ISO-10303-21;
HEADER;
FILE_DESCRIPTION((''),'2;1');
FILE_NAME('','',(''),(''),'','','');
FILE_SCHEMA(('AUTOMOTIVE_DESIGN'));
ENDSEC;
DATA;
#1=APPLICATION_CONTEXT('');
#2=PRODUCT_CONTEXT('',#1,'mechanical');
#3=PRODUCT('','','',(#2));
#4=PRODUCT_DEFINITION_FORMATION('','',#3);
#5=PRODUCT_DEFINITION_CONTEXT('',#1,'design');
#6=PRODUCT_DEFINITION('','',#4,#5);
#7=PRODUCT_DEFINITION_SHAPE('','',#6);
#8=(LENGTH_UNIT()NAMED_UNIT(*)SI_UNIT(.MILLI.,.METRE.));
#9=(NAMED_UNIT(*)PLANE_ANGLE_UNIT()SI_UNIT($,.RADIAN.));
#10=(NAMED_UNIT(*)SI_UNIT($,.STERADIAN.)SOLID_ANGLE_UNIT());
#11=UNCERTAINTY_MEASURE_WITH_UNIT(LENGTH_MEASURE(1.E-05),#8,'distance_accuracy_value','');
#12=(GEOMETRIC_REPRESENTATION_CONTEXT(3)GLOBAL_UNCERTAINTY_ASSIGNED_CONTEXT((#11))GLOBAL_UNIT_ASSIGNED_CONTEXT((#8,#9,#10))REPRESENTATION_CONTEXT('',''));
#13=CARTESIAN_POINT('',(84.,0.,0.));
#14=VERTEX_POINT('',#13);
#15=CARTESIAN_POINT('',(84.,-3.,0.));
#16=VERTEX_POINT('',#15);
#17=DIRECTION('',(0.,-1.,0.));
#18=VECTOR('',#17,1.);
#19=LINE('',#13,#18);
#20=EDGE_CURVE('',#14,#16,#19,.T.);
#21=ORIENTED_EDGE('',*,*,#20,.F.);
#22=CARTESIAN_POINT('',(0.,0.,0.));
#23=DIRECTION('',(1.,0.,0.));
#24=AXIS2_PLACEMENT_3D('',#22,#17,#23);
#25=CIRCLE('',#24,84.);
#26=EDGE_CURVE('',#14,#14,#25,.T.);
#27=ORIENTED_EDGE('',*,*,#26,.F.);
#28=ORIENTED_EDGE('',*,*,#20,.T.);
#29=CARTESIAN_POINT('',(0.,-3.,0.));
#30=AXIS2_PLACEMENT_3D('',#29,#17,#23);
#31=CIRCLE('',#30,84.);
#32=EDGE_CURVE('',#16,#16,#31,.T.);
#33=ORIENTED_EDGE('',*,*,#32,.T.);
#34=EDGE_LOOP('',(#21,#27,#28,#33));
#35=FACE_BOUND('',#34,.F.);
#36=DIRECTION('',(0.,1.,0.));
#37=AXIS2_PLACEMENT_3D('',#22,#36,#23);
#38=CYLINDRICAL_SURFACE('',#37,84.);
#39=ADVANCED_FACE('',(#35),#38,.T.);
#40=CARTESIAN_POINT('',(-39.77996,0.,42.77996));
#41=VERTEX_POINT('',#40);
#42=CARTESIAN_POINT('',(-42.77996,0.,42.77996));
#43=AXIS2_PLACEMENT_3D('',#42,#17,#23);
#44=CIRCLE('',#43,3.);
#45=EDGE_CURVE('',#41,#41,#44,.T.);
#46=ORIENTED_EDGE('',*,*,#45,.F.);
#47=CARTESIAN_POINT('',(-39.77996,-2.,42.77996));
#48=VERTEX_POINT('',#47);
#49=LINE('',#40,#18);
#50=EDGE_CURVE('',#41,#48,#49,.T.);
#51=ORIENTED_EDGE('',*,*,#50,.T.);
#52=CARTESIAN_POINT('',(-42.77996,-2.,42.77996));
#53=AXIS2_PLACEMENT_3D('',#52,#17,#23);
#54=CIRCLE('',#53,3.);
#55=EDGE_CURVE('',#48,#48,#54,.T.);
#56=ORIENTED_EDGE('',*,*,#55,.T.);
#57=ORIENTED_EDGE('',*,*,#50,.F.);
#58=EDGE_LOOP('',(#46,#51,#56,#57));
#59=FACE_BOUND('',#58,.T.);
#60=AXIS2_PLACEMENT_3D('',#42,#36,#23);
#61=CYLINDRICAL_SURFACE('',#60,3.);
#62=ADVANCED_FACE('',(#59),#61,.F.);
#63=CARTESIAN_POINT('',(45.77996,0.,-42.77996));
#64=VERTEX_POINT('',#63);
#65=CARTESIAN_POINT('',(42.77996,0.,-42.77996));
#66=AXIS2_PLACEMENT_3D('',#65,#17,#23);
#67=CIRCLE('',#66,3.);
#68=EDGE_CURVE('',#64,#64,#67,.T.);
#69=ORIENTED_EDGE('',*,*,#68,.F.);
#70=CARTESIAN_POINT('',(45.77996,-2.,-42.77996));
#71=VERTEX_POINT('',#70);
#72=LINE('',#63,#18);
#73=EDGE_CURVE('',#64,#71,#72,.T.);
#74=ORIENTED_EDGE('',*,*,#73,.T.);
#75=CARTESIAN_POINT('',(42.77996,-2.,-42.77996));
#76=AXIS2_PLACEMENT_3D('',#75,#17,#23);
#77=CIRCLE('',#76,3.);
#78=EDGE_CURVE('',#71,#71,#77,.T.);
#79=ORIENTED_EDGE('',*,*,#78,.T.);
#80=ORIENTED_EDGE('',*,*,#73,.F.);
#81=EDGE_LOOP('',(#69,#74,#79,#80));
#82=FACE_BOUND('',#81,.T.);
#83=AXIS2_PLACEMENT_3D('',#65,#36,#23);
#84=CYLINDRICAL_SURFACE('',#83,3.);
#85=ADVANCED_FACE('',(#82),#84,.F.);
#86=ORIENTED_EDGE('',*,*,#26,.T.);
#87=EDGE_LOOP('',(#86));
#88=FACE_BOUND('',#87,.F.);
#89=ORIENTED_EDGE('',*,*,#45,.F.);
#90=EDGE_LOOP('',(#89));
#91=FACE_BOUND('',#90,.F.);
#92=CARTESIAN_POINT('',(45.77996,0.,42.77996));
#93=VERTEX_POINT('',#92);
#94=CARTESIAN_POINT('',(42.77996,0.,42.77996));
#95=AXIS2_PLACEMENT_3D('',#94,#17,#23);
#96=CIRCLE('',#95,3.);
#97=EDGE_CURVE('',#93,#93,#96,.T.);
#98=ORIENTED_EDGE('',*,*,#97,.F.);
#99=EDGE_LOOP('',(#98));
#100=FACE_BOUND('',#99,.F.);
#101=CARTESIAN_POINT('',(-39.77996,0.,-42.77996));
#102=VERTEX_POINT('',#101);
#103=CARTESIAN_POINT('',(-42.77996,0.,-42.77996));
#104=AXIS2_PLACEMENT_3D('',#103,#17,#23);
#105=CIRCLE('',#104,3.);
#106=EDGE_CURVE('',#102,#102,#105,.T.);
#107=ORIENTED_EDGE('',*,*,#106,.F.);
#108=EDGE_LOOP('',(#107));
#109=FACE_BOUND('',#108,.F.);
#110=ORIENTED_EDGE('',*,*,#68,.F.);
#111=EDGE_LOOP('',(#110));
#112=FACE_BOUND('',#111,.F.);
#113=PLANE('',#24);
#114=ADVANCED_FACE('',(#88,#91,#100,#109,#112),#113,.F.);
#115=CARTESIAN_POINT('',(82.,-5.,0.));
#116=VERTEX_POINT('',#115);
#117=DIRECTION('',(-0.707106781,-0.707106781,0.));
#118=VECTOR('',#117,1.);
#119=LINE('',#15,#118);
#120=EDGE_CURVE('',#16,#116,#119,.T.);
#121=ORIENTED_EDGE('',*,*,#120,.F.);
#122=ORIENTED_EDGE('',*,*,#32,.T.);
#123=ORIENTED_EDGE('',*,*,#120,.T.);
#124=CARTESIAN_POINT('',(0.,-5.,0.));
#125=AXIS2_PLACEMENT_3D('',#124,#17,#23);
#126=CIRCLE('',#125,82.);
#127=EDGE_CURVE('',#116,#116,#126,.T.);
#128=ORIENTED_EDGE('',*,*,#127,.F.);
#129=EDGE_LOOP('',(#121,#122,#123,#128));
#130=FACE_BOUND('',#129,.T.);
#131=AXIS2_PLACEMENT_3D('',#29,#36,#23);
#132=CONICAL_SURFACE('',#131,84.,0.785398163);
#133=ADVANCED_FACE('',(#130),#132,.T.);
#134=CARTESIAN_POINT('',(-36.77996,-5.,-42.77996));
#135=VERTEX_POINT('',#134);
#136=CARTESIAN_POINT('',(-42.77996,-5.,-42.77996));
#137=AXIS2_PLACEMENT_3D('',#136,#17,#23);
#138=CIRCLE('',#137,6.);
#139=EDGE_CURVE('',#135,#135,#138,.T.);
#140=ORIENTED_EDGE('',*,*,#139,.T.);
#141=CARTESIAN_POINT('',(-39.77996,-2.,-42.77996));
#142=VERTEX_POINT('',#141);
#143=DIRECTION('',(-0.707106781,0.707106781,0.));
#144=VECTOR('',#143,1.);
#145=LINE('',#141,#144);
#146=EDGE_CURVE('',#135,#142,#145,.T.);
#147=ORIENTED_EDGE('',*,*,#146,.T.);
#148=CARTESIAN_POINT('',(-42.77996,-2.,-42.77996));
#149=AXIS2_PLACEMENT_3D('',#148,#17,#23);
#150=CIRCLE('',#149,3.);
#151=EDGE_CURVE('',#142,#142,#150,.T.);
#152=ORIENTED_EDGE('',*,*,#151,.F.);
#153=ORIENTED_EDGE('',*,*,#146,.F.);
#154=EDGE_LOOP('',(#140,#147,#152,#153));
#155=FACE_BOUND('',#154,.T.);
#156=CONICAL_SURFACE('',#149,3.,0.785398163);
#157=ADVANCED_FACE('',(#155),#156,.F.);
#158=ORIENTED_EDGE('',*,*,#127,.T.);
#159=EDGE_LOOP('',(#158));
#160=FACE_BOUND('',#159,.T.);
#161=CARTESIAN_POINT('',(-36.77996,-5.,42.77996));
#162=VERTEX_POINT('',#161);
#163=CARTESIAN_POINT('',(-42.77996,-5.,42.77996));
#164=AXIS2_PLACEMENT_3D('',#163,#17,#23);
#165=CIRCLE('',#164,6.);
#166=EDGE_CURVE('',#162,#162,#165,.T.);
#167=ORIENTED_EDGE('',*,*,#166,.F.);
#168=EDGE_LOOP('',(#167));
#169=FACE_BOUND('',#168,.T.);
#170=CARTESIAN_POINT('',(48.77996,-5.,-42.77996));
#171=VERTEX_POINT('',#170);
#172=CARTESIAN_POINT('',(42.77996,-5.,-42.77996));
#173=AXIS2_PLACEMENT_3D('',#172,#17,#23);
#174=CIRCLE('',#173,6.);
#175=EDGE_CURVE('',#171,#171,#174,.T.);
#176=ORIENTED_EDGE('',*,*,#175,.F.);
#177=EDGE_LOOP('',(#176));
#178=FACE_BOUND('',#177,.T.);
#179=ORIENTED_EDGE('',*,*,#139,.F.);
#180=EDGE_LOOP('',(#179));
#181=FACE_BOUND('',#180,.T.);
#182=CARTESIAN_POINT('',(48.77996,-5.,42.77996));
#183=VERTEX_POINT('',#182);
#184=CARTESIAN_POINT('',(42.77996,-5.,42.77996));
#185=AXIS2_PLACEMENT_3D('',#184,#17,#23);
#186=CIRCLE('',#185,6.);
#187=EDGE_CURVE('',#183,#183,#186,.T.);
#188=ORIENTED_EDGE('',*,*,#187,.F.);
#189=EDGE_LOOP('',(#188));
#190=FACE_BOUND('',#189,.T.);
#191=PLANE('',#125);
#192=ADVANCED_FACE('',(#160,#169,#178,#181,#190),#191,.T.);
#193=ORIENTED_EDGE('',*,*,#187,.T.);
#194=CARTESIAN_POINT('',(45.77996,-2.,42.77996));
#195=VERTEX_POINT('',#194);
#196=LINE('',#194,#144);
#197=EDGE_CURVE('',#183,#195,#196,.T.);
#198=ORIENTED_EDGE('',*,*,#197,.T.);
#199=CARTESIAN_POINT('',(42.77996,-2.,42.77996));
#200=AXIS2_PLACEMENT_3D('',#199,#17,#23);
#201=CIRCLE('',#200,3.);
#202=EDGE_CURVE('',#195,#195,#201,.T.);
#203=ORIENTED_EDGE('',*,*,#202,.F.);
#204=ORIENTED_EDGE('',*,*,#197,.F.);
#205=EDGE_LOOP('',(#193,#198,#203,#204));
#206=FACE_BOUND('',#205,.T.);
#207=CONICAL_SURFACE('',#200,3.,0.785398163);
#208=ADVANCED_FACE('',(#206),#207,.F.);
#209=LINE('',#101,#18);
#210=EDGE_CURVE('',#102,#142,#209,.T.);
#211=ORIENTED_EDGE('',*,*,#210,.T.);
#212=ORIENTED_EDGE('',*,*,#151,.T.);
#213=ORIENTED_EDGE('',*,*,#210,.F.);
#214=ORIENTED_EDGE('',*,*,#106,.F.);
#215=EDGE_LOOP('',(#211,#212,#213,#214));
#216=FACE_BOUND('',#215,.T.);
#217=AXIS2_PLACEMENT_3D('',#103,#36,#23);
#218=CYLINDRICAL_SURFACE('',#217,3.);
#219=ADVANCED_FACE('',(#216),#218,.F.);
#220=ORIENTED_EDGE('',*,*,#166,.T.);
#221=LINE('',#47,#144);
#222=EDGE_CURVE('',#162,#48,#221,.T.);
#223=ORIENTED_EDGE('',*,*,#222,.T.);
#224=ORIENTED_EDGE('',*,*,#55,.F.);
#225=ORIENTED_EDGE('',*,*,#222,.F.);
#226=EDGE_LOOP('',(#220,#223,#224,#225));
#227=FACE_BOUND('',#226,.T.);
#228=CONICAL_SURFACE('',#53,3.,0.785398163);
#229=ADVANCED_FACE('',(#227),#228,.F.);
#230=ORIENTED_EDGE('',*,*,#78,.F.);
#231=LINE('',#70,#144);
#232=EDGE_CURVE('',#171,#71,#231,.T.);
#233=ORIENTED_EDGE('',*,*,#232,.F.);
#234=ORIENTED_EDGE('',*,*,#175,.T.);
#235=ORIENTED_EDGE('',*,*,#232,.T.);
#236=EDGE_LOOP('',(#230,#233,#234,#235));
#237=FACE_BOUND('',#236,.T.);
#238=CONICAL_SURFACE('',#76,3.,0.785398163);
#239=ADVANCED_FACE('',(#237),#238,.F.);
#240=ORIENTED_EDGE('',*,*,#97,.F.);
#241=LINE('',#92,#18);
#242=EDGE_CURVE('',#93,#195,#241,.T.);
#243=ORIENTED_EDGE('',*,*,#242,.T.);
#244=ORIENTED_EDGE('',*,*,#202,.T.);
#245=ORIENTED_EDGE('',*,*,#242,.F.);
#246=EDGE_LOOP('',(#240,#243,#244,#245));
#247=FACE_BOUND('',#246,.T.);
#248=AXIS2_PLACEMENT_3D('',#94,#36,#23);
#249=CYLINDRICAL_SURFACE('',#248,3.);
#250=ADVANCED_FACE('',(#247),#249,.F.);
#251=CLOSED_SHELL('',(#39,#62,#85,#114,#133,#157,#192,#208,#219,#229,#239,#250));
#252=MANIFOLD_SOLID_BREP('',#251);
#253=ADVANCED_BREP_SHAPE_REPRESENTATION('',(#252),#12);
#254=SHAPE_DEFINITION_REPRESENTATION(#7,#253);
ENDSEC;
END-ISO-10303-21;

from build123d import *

# Parameters (mm, degrees)
F0_R     = 84
F0_R_2   = 3
F1_DEPTH = 5
F2_SIZE  = 2
F3_SIZE  = 3


# Not quite as in the source:
# - a feature names something its author has since deleted; it is built from what else it names


with BuildPart() as f1:
    # F0 (on Front) → F1 (new body)
    with BuildSketch(Plane.XZ):
        Circle(F0_R)
        with Locations((-42.7799602618, -42.7799602618)):
            Circle(F0_R_2, mode=Mode.SUBTRACT)
        with Locations((42.7799602618, -42.7799602618)):
            Circle(F0_R_2, mode=Mode.SUBTRACT)
        with Locations((-42.7799602618, 42.7799602618)):
            Circle(F0_R_2, mode=Mode.SUBTRACT)
        with Locations((42.7799602618, 42.7799602618)):
            Circle(F0_R_2, mode=Mode.SUBTRACT)
    extrude(amount=F1_DEPTH)

    # F2
    f2_edges = [f1.edges().sort_by_distance(p)[0] for p in [
        (-84, -5, 0),
    ]]
    chamfer(f2_edges, length=F2_SIZE)

    # F3
    f3_edges = [f1.edges().sort_by_distance(p)[0] for p in [
        (-45.77996, -5, 42.77996),
        (39.77996, -5, 42.77996),
        (-45.77996, -5, -42.77996),
        (39.77996, -5, -42.77996),
    ]]
    chamfer(f3_edges, length=F3_SIZE)


solid = f1.part
